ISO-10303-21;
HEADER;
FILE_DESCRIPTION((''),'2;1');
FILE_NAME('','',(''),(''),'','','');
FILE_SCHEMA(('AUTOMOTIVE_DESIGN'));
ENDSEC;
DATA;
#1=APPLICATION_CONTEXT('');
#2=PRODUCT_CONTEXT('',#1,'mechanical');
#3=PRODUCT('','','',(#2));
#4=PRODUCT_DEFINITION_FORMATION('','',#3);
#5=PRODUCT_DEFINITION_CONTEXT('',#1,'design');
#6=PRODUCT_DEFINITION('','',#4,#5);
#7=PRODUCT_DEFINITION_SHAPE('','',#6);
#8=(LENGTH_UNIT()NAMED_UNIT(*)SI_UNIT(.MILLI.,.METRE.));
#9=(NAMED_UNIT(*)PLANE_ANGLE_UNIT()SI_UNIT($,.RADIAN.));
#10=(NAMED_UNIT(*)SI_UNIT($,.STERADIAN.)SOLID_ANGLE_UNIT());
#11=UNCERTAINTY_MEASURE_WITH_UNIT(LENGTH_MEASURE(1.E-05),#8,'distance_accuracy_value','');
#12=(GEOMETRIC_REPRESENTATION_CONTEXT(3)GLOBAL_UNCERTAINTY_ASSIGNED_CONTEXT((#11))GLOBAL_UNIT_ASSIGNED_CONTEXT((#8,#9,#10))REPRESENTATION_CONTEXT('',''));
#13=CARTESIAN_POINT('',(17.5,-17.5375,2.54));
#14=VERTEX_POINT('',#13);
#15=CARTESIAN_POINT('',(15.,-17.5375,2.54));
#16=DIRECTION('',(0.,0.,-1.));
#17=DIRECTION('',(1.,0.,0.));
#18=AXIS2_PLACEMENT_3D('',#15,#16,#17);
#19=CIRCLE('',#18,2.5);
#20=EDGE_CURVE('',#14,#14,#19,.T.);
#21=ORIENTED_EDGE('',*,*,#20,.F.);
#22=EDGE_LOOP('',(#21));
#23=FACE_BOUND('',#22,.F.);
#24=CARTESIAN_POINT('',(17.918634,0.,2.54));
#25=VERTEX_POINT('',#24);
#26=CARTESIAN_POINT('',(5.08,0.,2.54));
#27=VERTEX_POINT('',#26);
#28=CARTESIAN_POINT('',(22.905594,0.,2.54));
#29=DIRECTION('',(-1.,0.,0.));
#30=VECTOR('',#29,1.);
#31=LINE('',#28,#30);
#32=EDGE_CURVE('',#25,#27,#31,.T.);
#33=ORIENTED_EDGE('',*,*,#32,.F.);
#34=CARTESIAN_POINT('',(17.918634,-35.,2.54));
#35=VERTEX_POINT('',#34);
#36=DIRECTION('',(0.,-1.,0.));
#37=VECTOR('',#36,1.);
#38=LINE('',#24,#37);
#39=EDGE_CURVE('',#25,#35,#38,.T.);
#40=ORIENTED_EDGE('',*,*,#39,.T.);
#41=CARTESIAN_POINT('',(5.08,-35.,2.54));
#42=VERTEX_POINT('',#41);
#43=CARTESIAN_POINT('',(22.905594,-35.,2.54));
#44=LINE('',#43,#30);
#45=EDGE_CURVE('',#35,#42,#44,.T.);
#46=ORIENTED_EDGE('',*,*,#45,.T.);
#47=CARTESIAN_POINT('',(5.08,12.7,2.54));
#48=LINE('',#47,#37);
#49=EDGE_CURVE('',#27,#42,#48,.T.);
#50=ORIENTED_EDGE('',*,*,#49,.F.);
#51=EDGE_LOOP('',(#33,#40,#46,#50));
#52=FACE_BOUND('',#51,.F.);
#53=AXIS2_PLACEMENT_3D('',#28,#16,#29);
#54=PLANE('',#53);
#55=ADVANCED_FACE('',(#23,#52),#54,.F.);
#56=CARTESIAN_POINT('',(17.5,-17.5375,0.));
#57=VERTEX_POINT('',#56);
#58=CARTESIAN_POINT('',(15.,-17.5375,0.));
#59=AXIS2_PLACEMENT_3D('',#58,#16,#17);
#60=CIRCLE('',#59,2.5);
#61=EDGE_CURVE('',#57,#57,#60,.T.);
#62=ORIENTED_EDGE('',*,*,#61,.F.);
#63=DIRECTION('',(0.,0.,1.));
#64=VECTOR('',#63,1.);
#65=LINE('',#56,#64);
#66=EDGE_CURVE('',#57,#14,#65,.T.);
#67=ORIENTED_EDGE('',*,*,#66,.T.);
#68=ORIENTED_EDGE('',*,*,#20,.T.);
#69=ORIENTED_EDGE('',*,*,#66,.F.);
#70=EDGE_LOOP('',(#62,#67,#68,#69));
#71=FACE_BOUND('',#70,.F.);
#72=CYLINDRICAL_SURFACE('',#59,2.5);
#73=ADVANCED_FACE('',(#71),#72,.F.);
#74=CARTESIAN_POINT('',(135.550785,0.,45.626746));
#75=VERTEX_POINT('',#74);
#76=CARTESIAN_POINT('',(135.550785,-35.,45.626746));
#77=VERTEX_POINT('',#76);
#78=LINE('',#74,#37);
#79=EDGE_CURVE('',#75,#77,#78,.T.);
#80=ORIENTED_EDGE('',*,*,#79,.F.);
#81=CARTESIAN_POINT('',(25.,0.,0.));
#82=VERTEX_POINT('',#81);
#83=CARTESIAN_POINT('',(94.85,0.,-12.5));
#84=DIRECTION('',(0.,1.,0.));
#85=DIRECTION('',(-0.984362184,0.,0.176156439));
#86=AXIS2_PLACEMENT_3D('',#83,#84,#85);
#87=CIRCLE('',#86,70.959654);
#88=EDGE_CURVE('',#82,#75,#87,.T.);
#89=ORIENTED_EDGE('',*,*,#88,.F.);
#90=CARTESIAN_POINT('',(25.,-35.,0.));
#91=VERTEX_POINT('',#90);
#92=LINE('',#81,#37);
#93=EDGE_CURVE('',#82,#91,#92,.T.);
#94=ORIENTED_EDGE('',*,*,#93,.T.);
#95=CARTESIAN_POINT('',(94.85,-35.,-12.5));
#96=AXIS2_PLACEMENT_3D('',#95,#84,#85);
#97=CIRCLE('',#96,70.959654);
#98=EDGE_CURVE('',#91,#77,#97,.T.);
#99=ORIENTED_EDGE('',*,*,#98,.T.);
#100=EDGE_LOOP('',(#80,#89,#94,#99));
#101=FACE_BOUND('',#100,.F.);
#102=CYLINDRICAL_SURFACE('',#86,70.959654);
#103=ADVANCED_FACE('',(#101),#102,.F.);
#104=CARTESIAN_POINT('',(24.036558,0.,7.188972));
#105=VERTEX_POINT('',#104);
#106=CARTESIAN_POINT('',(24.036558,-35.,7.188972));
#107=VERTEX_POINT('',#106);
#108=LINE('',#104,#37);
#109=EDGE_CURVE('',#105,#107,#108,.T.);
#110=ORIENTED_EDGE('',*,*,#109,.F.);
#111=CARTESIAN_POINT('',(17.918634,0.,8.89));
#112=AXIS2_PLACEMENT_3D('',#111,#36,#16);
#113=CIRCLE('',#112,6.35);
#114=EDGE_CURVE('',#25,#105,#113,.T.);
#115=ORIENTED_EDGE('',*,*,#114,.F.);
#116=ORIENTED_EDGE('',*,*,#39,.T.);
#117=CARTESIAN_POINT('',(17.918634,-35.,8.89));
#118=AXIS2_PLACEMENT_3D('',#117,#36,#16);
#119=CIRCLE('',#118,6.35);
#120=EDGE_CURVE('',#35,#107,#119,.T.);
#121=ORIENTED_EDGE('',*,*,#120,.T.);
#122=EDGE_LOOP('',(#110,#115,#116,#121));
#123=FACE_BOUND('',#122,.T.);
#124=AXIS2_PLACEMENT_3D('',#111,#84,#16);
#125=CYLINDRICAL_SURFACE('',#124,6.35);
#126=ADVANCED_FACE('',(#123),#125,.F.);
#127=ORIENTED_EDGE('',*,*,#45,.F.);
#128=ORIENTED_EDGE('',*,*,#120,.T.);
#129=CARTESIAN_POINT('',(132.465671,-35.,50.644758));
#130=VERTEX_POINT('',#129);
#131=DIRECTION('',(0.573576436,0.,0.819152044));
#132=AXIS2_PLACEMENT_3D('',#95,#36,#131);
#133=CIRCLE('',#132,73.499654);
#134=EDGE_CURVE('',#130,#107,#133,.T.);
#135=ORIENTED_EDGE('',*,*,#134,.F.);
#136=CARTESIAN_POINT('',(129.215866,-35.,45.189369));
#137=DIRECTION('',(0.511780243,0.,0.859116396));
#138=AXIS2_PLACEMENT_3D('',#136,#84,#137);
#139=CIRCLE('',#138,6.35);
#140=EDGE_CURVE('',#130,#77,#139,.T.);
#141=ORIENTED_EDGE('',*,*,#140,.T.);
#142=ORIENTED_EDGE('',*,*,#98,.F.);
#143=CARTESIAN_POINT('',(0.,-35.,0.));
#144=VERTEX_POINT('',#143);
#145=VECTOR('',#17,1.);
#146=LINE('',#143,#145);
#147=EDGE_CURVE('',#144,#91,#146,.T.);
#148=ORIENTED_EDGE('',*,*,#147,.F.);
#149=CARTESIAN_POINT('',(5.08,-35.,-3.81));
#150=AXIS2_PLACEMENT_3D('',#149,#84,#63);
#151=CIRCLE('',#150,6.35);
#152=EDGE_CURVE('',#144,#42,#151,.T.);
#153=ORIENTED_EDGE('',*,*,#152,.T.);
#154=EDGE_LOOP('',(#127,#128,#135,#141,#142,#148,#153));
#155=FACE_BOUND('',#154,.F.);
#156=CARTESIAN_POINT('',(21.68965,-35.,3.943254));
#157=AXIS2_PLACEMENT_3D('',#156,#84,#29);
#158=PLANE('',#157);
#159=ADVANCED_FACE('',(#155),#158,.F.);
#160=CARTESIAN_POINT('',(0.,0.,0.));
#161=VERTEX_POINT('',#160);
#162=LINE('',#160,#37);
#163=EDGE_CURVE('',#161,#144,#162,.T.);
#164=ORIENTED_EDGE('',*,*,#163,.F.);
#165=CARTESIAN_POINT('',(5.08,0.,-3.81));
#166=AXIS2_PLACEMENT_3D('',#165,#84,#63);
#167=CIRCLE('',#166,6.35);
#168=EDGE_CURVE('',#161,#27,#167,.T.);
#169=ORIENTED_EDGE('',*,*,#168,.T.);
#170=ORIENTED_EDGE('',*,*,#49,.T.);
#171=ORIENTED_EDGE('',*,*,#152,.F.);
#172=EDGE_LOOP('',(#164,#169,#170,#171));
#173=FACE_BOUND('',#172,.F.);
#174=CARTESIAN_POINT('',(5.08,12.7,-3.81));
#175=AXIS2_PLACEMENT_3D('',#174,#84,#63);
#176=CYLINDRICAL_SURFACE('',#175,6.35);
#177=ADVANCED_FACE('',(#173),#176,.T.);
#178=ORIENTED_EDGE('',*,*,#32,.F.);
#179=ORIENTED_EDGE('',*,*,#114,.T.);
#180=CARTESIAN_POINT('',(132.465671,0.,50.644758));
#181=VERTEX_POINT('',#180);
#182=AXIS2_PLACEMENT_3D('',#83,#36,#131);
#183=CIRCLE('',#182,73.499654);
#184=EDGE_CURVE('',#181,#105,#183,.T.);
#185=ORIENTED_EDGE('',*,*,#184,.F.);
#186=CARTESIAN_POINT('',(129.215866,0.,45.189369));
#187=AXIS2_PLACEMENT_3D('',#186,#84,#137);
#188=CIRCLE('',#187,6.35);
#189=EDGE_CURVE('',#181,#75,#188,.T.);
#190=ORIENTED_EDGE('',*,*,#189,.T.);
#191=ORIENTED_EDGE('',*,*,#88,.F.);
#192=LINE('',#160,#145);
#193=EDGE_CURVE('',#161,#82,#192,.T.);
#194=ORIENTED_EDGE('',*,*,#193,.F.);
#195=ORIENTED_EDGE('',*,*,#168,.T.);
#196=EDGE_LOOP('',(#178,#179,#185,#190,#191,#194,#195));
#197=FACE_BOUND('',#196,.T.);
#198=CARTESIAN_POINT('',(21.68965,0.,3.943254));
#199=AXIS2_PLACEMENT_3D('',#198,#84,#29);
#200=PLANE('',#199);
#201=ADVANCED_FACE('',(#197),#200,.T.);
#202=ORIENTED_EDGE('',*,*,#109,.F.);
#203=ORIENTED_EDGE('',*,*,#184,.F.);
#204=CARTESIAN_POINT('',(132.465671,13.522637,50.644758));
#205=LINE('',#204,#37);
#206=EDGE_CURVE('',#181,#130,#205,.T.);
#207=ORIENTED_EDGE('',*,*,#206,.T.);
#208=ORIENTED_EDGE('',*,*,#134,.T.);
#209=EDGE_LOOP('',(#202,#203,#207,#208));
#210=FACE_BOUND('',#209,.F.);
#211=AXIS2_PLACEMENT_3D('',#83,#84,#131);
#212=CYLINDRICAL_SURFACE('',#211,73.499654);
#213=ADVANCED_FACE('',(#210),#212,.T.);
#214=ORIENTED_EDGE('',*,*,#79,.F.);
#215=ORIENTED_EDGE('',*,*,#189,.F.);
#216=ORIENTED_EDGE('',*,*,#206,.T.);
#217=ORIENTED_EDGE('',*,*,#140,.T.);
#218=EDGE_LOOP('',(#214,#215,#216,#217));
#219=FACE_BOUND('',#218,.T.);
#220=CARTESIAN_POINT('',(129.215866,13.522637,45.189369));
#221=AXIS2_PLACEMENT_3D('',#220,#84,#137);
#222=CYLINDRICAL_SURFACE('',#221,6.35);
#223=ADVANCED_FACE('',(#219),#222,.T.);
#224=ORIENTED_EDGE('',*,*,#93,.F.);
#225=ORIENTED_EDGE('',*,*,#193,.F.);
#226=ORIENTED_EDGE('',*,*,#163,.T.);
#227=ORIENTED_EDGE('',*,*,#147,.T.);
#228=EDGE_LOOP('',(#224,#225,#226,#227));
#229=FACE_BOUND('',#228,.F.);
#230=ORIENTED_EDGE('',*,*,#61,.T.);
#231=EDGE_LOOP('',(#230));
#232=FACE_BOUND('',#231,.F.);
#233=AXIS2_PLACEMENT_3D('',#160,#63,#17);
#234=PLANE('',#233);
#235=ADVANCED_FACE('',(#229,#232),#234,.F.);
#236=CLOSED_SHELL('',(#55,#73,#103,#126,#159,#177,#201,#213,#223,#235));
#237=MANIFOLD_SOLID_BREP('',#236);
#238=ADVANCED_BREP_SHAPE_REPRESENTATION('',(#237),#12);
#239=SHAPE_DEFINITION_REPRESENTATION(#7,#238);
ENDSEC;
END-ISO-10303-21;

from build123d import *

# Parameters (mm, degrees)
F1_DEPTH    = 35
F2_T1_DEPTH = 35
F2_T3_DEPTH = 60.4
F2_T5_DEPTH = 62.0452734599
F3_R        = 2.5
F4_DEPTH    = 61.0006540296


# Not quite as in the source:
# - a fillet or chamfer that OpenCascade refuses, or shapes differently, is made with other operations: its cross-section is extruded or revolved along the edge and cut away or added


with BuildPart() as f1:
    # F0 (on Front) → F1 (new body)
    with BuildSketch(Plane.XZ):
        with BuildLine():
            Line((0, 2.54), (0, 0))
            Line((0, 0), (25, 0))
            ThreePointArc((25, 0), (67.7784437716, 53.0927080046), (135.550785483, 45.6267456604))
            Line((135.550785483, 45.6267456604), (137.0076696313, 47.7073918529))
            ThreePointArc((137.0076696313, 47.7073918529), (67.7975373338, 55.8400571127), (22.9055940849, 2.54))
            Line((22.9055940849, 2.54), (0, 2.54))
        make_face()
    extrude(amount=F1_DEPTH)

    # F2: fillet of radius 6.35 on 3 edges, made by hand

    # F2_s2 → F2_t1 (join)
    with BuildSketch(Plane.XZ):
        with BuildLine():
            ThreePointArc((17.9186335189, 2.54), (21.7605713102, 3.8341109577), (24.0365583001, 7.1889719661))
            ThreePointArc((24.0365583001, 7.1889719661), (23.4332372688, 4.8736911297), (22.9055940849, 2.54))
            Line((22.9055940849, 2.54), (17.9186335189, 2.54))
        make_face()
    extrude(amount=F2_T1_DEPTH)

    # F2_s4 → F2_t3 (cut)
    with BuildSketch(Plane.XZ.offset(-12.7)):
        with BuildLine():
            ThreePointArc((5.08, 2.54), (2.2401936686, 1.8696126628), (0, 0))
            Line((0, 0), (0, 2.54))
            Line((0, 2.54), (5.08, 2.54))
        make_face()
    extrude(amount=F2_T3_DEPTH, mode=Mode.SUBTRACT)

    # F2_s6 → F2_t5 (cut)
    with BuildSketch(Plane.XZ.offset(-13.52263673)):
        with BuildLine():
            ThreePointArc((132.4656708106, 50.6447579134), (134.6252880595, 48.5151252309), (135.550785483, 45.6267456604))
            Line((135.550785483, 45.6267456604), (137.0076696313, 47.7073918529))
            ThreePointArc((137.0076696313, 47.7073918529), (134.7637005445, 49.2178714094), (132.4656708106, 50.6447579134))
        make_face()
    extrude(amount=F2_T5_DEPTH, mode=Mode.SUBTRACT)

    # F3 (on face) → F4 (cut, through all)
    with BuildSketch(Plane(origin=(0, 0, 0), x_dir=(1, 0, 0), z_dir=(0, 0, -1))):
        with Locations((15, 17.5375)):
            Circle(F3_R)
    extrude(amount=-F4_DEPTH, mode=Mode.SUBTRACT)


solid = f1.part
